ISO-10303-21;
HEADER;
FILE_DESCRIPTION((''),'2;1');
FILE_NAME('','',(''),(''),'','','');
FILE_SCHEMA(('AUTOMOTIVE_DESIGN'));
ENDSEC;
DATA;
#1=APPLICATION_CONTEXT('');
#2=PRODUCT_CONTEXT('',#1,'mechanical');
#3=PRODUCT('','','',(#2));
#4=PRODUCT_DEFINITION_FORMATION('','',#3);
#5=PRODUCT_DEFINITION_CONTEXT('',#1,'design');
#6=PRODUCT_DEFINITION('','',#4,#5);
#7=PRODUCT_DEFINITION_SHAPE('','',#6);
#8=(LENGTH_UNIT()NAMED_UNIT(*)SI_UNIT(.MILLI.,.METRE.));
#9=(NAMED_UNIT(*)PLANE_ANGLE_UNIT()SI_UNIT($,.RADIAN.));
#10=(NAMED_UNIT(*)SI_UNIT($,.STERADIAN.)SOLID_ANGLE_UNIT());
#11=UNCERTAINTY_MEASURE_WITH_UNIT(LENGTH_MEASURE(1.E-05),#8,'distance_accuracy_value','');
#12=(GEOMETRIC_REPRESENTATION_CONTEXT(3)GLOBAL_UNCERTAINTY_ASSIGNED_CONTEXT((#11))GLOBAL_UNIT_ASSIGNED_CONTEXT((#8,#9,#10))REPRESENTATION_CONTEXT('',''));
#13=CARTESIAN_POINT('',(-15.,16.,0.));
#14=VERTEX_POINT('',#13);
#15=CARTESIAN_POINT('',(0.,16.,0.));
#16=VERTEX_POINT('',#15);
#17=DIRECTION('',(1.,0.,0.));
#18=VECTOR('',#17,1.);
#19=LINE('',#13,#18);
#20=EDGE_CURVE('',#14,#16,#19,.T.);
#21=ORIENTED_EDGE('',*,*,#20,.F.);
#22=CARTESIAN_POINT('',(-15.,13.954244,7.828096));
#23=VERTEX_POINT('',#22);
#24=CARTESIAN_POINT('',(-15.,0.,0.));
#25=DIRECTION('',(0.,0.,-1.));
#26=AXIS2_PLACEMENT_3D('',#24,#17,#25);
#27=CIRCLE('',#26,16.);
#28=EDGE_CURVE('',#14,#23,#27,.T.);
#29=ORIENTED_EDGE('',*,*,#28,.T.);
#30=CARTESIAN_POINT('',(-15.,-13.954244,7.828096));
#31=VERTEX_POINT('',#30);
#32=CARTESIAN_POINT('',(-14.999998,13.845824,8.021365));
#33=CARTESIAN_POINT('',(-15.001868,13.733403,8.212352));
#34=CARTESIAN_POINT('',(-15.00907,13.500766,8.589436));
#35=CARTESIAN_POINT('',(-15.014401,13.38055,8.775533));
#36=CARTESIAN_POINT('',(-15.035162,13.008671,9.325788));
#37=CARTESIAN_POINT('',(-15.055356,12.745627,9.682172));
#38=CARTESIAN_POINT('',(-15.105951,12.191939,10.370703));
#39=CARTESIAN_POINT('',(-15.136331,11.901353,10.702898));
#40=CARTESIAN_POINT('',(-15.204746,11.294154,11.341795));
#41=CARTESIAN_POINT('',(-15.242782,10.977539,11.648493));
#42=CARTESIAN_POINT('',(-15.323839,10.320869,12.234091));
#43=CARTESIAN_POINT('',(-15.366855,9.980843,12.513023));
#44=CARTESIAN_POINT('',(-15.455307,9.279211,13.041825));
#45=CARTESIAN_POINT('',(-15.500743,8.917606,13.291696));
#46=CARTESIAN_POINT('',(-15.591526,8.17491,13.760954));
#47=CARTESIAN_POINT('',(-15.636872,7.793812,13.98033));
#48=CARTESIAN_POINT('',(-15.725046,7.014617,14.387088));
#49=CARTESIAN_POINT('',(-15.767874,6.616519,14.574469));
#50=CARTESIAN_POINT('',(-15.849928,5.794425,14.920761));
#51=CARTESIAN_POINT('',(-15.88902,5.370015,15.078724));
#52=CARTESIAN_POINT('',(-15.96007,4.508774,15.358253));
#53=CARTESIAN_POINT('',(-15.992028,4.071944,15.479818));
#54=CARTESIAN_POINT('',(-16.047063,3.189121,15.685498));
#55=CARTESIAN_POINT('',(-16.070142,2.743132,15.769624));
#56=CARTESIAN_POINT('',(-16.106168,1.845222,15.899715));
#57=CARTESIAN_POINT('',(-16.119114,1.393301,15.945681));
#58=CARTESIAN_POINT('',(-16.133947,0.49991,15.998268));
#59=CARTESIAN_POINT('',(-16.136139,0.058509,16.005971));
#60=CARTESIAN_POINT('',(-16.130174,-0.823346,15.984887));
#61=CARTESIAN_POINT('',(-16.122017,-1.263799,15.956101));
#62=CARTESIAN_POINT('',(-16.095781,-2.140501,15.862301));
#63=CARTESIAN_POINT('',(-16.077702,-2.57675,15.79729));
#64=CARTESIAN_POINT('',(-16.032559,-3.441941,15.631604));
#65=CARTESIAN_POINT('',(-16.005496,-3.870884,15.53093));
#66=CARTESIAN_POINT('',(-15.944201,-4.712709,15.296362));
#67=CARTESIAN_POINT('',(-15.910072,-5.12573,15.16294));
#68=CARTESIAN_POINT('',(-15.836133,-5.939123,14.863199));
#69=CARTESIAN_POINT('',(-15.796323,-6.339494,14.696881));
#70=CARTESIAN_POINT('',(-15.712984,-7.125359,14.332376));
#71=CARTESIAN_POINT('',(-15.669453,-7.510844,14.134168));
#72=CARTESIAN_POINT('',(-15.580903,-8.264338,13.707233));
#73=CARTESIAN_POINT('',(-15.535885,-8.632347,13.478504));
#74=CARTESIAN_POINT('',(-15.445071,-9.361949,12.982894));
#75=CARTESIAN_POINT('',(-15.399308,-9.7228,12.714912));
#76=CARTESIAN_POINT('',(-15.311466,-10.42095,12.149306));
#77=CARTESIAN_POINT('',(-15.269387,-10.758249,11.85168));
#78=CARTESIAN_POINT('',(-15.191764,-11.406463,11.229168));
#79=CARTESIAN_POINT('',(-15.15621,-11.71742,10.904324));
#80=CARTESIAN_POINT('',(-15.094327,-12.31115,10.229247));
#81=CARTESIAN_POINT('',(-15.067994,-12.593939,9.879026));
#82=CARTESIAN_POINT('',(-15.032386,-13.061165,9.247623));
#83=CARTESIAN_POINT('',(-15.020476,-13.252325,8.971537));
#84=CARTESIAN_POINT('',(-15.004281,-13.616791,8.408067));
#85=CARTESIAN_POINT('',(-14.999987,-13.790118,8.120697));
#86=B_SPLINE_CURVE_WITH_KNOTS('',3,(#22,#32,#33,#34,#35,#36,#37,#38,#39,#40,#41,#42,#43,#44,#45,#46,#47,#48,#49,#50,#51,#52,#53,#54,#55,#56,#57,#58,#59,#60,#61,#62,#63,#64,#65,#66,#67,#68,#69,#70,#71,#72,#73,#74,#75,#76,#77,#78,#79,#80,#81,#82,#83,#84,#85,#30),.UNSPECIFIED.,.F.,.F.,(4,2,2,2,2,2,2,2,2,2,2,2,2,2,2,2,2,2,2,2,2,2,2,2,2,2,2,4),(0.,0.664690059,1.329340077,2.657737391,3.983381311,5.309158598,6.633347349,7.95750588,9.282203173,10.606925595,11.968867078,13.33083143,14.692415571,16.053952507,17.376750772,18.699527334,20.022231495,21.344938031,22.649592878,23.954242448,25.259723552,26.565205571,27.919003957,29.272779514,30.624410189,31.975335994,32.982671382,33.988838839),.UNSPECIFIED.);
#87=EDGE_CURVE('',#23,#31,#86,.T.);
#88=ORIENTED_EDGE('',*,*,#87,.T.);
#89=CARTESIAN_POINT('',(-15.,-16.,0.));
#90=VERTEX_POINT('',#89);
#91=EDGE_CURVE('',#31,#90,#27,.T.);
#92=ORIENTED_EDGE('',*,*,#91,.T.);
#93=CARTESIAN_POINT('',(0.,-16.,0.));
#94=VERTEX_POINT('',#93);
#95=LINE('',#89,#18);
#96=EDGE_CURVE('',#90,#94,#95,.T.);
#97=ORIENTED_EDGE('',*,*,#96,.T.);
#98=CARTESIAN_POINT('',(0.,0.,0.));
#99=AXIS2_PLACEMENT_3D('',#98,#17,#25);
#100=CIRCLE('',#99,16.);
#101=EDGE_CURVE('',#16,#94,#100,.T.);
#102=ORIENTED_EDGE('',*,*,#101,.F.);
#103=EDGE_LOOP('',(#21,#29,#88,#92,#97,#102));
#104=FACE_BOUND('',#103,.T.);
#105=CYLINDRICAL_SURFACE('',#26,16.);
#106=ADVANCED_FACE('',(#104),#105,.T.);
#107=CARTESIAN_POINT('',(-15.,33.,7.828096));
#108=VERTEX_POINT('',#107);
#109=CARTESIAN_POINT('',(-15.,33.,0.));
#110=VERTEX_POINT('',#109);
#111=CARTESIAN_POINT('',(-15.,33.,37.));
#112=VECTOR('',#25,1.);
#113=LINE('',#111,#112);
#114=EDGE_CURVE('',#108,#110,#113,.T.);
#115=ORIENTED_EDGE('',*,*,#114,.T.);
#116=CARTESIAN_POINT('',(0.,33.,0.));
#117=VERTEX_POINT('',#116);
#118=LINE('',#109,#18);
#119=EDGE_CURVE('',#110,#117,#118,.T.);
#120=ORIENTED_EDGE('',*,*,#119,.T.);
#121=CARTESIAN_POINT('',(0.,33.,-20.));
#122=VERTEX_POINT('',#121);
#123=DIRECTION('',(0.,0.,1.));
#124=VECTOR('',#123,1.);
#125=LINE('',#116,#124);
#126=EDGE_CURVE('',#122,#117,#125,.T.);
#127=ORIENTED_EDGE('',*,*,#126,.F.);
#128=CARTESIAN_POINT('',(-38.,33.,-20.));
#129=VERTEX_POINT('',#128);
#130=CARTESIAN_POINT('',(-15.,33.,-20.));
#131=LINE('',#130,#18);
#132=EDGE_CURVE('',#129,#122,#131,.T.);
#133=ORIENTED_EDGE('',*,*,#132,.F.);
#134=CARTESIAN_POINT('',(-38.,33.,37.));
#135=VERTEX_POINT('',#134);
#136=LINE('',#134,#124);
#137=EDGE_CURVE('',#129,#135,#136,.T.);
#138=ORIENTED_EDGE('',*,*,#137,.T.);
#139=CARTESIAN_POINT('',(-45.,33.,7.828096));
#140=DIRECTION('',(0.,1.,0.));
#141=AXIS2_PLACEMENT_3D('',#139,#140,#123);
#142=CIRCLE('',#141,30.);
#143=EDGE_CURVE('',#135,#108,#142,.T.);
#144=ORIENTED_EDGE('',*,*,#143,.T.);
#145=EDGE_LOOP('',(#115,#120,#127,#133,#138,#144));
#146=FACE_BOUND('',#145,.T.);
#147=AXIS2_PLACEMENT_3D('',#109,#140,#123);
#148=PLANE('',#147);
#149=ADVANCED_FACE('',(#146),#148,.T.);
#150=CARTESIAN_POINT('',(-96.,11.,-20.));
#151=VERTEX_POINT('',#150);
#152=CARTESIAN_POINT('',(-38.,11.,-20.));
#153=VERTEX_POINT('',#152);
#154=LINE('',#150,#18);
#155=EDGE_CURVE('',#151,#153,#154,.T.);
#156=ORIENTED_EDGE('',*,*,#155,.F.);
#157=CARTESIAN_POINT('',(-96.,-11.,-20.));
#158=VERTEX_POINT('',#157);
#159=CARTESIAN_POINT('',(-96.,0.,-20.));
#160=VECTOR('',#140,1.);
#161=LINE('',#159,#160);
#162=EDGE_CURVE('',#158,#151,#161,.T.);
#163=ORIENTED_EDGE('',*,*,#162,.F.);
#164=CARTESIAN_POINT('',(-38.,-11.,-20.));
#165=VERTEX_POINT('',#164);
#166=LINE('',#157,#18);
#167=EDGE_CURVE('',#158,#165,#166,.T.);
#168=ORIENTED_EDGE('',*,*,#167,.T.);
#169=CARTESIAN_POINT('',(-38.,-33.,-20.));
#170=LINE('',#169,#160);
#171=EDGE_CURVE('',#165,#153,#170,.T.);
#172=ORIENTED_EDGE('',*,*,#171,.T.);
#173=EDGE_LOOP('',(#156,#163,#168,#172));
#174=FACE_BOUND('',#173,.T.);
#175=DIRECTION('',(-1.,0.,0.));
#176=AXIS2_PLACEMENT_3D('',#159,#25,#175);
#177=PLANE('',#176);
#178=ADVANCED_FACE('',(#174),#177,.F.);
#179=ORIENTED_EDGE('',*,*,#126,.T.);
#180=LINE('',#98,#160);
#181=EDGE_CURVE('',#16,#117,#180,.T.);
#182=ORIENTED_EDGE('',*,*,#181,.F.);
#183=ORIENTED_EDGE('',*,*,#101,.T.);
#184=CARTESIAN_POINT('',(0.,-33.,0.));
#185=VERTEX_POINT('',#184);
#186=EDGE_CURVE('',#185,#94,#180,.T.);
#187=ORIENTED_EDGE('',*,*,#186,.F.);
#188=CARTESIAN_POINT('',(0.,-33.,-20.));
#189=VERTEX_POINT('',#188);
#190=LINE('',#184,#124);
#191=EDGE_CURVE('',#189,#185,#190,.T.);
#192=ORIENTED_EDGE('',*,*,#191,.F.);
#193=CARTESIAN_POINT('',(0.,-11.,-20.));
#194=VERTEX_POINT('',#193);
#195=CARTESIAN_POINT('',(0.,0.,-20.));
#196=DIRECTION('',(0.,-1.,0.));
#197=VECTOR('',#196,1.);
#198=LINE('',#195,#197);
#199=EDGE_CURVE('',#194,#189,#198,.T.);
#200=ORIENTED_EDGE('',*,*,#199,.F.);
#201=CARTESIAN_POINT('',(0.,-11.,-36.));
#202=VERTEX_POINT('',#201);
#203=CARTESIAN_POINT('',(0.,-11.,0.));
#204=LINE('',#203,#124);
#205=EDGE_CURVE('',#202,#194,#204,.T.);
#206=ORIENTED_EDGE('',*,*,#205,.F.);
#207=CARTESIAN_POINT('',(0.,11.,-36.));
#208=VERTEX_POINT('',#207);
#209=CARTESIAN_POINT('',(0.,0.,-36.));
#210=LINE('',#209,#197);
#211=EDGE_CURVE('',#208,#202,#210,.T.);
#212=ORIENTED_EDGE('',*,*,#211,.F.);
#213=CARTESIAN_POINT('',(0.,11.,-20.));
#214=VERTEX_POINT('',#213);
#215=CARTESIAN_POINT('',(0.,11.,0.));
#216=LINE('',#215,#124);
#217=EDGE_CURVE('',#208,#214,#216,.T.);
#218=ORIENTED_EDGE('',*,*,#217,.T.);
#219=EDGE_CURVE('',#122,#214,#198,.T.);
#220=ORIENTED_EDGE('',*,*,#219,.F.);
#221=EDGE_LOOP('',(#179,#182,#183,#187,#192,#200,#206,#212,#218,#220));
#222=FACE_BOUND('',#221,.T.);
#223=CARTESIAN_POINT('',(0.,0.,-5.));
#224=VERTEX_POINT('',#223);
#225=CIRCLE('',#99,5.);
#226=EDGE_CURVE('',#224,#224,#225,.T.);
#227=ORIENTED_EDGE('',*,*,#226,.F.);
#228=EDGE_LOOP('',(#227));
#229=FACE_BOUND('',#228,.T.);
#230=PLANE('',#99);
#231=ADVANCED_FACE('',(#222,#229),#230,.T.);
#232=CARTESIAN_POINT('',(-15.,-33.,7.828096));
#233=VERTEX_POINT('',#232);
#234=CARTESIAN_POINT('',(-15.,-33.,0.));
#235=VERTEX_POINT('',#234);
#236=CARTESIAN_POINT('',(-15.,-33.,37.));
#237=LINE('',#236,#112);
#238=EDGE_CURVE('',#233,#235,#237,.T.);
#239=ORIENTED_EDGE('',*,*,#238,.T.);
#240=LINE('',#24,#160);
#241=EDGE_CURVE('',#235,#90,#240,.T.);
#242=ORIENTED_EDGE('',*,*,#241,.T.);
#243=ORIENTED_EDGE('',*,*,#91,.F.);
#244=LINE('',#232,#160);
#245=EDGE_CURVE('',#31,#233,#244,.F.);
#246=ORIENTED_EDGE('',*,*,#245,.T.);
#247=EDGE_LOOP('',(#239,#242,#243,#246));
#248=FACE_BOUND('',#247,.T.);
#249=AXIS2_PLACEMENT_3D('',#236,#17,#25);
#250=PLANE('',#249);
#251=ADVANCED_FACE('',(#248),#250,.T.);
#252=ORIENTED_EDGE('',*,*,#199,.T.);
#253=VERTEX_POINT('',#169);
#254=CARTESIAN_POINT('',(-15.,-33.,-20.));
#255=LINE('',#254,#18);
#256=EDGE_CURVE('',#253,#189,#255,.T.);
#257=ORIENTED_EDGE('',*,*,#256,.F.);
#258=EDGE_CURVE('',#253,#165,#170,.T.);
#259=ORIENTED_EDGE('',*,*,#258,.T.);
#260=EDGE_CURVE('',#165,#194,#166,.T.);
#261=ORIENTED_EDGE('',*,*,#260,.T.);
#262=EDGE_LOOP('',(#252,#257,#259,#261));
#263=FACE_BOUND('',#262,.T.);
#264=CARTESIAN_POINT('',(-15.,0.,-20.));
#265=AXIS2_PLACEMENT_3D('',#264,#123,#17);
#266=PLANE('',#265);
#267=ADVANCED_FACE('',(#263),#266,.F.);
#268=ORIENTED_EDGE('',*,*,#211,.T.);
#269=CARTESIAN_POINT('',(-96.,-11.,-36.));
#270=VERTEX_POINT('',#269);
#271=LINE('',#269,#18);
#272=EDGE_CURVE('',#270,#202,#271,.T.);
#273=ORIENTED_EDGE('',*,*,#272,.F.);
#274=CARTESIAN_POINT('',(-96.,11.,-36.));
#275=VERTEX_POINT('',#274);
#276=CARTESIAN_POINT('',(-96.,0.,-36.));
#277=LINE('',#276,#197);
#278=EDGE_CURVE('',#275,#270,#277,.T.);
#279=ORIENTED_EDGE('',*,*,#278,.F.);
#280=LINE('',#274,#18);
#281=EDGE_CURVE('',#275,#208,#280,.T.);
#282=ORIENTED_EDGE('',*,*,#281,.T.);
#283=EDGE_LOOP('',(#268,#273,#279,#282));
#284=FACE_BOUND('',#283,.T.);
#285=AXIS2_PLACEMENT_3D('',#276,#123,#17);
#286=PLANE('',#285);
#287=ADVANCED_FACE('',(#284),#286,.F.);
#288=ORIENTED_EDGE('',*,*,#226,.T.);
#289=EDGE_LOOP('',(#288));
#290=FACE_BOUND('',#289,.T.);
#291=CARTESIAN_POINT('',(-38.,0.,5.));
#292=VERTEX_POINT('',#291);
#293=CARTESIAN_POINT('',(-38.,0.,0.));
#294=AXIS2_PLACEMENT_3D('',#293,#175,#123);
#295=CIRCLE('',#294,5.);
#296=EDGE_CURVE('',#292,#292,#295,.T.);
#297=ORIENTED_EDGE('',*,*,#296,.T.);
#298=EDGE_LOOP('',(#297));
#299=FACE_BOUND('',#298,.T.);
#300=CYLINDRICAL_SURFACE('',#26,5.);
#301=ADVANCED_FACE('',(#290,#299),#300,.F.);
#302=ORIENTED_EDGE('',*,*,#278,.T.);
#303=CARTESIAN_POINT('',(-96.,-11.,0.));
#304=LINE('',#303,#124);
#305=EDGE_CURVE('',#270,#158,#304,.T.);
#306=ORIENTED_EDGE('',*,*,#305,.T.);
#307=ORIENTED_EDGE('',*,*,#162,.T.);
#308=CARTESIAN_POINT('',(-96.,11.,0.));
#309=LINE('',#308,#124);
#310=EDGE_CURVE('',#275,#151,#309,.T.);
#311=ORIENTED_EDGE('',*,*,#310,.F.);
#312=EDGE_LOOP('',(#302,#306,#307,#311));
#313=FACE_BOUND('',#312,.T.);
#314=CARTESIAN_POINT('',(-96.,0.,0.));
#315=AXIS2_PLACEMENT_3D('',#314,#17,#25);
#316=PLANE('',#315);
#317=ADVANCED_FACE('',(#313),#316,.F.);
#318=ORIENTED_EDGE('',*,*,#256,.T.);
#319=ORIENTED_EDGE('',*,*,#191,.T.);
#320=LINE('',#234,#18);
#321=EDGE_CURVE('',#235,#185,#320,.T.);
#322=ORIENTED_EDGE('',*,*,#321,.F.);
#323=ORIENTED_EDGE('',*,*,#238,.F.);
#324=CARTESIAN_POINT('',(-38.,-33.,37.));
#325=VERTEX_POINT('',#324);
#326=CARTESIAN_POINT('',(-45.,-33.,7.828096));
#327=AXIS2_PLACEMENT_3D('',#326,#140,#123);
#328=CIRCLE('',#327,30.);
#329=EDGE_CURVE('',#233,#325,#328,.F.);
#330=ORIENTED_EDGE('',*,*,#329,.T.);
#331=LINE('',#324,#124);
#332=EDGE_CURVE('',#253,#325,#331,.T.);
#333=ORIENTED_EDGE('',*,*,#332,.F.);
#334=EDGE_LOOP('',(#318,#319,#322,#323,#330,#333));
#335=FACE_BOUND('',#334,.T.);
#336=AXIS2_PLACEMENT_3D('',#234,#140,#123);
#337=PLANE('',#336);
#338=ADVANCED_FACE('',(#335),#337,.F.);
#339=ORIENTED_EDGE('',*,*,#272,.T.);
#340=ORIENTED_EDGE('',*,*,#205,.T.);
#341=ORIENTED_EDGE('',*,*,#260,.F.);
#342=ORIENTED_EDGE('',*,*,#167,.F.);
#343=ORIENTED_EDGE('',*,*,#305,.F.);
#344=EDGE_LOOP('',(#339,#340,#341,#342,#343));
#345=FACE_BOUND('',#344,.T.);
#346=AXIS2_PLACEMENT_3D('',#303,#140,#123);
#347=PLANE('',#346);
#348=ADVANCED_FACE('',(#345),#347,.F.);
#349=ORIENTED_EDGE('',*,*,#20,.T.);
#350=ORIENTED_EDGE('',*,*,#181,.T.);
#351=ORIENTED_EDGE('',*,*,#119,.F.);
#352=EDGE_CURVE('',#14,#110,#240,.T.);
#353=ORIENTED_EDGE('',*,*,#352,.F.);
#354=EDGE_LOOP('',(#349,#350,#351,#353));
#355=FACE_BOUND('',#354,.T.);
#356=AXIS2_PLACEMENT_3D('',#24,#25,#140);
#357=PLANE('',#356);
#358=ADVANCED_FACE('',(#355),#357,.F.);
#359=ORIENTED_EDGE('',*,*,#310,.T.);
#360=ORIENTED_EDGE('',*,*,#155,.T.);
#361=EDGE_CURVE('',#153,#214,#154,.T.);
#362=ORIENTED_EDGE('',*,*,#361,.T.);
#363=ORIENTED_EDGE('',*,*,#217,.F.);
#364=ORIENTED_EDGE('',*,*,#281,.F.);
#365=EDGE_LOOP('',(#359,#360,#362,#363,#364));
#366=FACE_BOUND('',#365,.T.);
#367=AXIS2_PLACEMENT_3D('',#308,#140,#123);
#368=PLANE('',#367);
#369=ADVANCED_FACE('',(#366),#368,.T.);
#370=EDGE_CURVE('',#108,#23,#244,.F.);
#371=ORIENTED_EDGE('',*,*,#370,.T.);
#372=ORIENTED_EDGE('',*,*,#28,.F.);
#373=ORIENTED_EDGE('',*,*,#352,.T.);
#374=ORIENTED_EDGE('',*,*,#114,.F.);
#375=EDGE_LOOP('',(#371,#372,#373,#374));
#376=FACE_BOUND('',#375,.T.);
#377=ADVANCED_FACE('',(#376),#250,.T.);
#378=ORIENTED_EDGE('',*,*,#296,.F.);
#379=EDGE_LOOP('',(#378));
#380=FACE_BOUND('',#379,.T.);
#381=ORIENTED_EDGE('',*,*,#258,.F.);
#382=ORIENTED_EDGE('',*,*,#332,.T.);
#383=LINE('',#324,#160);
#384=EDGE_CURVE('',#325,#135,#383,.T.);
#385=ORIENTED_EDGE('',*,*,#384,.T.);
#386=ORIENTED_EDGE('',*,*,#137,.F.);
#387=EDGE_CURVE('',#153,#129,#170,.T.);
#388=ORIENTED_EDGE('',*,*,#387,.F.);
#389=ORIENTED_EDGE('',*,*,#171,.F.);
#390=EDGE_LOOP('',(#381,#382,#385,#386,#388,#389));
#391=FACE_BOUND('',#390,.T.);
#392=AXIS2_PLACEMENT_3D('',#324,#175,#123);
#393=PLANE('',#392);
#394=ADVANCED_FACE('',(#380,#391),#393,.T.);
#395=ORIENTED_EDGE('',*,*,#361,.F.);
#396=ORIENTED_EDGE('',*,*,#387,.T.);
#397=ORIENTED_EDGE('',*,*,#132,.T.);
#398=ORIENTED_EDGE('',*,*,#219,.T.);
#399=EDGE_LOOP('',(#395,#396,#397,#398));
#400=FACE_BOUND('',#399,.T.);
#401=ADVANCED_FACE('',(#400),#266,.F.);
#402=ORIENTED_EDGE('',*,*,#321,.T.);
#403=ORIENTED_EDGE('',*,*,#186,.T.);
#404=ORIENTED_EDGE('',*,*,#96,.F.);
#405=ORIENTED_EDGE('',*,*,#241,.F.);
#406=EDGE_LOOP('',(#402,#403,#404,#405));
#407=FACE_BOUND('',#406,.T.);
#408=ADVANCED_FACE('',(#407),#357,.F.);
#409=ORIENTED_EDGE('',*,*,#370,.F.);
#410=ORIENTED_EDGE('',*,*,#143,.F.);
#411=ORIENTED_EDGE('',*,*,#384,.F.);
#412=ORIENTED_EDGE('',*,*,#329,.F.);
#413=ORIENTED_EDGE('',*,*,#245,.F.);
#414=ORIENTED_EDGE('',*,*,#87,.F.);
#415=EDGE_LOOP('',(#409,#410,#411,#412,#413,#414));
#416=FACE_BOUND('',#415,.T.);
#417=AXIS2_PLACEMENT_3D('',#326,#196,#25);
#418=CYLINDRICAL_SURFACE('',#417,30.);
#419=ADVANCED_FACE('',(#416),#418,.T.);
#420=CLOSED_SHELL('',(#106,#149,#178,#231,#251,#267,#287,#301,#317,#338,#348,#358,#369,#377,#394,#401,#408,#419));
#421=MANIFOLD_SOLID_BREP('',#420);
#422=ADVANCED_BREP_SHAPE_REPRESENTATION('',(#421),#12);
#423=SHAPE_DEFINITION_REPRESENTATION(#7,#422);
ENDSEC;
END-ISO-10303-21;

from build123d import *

# Parameters (mm, degrees)
SKETCH1_R               = 5
BOSS_EXTRUDE1_DEPTH     = 15
SKETCH1_3_W             = 22
SKETCH1_3_H             = 16
BOSS_EXTRUDE2_DEPTH     = 96
SKETCH2_W               = 23
SKETCH2_H               = 57
BOSS_EXTRUDE3_DEPTH     = 66
FILLET1_R               = 30
CUT_EXTRUDE1_DEPTH      = 109.046286442
CUT_EXTRUDE1_DEPTH_BACK = 109.046286442
SKETCH1_4_R             = 5


with BuildPart() as part:
    # Sketch1 → Boss-Extrude1 (new body)
    with BuildSketch(Plane.YZ):
        with BuildLine():
            Line((16, 0), (33, 0))
            Line((33, 0), (33, -20))
            Line((33, -20), (11, -20))
            Line((11, -20), (-11, -20))
            Line((-11, -20), (-33, -20))
            Line((-33, -20), (-33, 0))
            Line((-33, 0), (-16, 0))
            ThreePointArc((-16, 0), (0, 16), (16, 0))
        make_face()
        with Locations(Location((0, 0, 0), (0, 0, 270))):
            Circle(SKETCH1_R, mode=Mode.SUBTRACT)
    extrude(amount=-BOSS_EXTRUDE1_DEPTH)

    # Sketch1<3> → Boss-Extrude2 (add)
    with BuildSketch(Plane.YZ):
        with Locations((0, -28)):
            Rectangle(SKETCH1_3_W, SKETCH1_3_H)
    extrude(amount=-BOSS_EXTRUDE2_DEPTH)

    # Sketch2 → Boss-Extrude3 (add)
    with BuildSketch(Plane(origin=(0, 33, 0), x_dir=(-1, 0, 0), z_dir=(0, 1, 0))):
        with Locations((26.5, 8.5)):
            Rectangle(SKETCH2_W, SKETCH2_H)
    extrude(amount=-BOSS_EXTRUDE3_DEPTH)

    # Fillet1
    # the kernel refuses this fillet: 30 mm, written as the material it takes off along each edge
    with BuildSketch(Plane(origin=(-15, 105.929760729, 37), x_dir=(0, 0, -1), z_dir=(0, -1, 0))) as fillet1_piece_1_section:
        with BuildLine():
            CenterArc((29.171904292, -30), FILLET1_R, 90, 76.506601178)
            Line((0, -23), (0, 0))
            Line((0, 0), (29.171904292, 0))
        make_face()
    fillet1_piece_1 = extrude(amount=211.859521458, mode=Mode.PRIVATE)
    fillet1_piece_1 = fillet1_piece_1 - Plane(origin=(-15, 0, 0), x_dir=(0, -1, 0), z_dir=(1, 0, 0)) * Cylinder(16, 541, mode=Mode.PRIVATE)
    add(fillet1_piece_1, mode=Mode.SUBTRACT)

    # Sketch1<4> → Cut-Extrude1 (cut, two sides: drawn at the far end of the back side and taken through both)
    with BuildSketch(Plane.YZ.offset(-CUT_EXTRUDE1_DEPTH_BACK)):
        with Locations(Location((0, 0, 0), (0, 0, 270))):
            Circle(SKETCH1_4_R)
    extrude(amount=CUT_EXTRUDE1_DEPTH + CUT_EXTRUDE1_DEPTH_BACK, mode=Mode.SUBTRACT)


solid = part.part
